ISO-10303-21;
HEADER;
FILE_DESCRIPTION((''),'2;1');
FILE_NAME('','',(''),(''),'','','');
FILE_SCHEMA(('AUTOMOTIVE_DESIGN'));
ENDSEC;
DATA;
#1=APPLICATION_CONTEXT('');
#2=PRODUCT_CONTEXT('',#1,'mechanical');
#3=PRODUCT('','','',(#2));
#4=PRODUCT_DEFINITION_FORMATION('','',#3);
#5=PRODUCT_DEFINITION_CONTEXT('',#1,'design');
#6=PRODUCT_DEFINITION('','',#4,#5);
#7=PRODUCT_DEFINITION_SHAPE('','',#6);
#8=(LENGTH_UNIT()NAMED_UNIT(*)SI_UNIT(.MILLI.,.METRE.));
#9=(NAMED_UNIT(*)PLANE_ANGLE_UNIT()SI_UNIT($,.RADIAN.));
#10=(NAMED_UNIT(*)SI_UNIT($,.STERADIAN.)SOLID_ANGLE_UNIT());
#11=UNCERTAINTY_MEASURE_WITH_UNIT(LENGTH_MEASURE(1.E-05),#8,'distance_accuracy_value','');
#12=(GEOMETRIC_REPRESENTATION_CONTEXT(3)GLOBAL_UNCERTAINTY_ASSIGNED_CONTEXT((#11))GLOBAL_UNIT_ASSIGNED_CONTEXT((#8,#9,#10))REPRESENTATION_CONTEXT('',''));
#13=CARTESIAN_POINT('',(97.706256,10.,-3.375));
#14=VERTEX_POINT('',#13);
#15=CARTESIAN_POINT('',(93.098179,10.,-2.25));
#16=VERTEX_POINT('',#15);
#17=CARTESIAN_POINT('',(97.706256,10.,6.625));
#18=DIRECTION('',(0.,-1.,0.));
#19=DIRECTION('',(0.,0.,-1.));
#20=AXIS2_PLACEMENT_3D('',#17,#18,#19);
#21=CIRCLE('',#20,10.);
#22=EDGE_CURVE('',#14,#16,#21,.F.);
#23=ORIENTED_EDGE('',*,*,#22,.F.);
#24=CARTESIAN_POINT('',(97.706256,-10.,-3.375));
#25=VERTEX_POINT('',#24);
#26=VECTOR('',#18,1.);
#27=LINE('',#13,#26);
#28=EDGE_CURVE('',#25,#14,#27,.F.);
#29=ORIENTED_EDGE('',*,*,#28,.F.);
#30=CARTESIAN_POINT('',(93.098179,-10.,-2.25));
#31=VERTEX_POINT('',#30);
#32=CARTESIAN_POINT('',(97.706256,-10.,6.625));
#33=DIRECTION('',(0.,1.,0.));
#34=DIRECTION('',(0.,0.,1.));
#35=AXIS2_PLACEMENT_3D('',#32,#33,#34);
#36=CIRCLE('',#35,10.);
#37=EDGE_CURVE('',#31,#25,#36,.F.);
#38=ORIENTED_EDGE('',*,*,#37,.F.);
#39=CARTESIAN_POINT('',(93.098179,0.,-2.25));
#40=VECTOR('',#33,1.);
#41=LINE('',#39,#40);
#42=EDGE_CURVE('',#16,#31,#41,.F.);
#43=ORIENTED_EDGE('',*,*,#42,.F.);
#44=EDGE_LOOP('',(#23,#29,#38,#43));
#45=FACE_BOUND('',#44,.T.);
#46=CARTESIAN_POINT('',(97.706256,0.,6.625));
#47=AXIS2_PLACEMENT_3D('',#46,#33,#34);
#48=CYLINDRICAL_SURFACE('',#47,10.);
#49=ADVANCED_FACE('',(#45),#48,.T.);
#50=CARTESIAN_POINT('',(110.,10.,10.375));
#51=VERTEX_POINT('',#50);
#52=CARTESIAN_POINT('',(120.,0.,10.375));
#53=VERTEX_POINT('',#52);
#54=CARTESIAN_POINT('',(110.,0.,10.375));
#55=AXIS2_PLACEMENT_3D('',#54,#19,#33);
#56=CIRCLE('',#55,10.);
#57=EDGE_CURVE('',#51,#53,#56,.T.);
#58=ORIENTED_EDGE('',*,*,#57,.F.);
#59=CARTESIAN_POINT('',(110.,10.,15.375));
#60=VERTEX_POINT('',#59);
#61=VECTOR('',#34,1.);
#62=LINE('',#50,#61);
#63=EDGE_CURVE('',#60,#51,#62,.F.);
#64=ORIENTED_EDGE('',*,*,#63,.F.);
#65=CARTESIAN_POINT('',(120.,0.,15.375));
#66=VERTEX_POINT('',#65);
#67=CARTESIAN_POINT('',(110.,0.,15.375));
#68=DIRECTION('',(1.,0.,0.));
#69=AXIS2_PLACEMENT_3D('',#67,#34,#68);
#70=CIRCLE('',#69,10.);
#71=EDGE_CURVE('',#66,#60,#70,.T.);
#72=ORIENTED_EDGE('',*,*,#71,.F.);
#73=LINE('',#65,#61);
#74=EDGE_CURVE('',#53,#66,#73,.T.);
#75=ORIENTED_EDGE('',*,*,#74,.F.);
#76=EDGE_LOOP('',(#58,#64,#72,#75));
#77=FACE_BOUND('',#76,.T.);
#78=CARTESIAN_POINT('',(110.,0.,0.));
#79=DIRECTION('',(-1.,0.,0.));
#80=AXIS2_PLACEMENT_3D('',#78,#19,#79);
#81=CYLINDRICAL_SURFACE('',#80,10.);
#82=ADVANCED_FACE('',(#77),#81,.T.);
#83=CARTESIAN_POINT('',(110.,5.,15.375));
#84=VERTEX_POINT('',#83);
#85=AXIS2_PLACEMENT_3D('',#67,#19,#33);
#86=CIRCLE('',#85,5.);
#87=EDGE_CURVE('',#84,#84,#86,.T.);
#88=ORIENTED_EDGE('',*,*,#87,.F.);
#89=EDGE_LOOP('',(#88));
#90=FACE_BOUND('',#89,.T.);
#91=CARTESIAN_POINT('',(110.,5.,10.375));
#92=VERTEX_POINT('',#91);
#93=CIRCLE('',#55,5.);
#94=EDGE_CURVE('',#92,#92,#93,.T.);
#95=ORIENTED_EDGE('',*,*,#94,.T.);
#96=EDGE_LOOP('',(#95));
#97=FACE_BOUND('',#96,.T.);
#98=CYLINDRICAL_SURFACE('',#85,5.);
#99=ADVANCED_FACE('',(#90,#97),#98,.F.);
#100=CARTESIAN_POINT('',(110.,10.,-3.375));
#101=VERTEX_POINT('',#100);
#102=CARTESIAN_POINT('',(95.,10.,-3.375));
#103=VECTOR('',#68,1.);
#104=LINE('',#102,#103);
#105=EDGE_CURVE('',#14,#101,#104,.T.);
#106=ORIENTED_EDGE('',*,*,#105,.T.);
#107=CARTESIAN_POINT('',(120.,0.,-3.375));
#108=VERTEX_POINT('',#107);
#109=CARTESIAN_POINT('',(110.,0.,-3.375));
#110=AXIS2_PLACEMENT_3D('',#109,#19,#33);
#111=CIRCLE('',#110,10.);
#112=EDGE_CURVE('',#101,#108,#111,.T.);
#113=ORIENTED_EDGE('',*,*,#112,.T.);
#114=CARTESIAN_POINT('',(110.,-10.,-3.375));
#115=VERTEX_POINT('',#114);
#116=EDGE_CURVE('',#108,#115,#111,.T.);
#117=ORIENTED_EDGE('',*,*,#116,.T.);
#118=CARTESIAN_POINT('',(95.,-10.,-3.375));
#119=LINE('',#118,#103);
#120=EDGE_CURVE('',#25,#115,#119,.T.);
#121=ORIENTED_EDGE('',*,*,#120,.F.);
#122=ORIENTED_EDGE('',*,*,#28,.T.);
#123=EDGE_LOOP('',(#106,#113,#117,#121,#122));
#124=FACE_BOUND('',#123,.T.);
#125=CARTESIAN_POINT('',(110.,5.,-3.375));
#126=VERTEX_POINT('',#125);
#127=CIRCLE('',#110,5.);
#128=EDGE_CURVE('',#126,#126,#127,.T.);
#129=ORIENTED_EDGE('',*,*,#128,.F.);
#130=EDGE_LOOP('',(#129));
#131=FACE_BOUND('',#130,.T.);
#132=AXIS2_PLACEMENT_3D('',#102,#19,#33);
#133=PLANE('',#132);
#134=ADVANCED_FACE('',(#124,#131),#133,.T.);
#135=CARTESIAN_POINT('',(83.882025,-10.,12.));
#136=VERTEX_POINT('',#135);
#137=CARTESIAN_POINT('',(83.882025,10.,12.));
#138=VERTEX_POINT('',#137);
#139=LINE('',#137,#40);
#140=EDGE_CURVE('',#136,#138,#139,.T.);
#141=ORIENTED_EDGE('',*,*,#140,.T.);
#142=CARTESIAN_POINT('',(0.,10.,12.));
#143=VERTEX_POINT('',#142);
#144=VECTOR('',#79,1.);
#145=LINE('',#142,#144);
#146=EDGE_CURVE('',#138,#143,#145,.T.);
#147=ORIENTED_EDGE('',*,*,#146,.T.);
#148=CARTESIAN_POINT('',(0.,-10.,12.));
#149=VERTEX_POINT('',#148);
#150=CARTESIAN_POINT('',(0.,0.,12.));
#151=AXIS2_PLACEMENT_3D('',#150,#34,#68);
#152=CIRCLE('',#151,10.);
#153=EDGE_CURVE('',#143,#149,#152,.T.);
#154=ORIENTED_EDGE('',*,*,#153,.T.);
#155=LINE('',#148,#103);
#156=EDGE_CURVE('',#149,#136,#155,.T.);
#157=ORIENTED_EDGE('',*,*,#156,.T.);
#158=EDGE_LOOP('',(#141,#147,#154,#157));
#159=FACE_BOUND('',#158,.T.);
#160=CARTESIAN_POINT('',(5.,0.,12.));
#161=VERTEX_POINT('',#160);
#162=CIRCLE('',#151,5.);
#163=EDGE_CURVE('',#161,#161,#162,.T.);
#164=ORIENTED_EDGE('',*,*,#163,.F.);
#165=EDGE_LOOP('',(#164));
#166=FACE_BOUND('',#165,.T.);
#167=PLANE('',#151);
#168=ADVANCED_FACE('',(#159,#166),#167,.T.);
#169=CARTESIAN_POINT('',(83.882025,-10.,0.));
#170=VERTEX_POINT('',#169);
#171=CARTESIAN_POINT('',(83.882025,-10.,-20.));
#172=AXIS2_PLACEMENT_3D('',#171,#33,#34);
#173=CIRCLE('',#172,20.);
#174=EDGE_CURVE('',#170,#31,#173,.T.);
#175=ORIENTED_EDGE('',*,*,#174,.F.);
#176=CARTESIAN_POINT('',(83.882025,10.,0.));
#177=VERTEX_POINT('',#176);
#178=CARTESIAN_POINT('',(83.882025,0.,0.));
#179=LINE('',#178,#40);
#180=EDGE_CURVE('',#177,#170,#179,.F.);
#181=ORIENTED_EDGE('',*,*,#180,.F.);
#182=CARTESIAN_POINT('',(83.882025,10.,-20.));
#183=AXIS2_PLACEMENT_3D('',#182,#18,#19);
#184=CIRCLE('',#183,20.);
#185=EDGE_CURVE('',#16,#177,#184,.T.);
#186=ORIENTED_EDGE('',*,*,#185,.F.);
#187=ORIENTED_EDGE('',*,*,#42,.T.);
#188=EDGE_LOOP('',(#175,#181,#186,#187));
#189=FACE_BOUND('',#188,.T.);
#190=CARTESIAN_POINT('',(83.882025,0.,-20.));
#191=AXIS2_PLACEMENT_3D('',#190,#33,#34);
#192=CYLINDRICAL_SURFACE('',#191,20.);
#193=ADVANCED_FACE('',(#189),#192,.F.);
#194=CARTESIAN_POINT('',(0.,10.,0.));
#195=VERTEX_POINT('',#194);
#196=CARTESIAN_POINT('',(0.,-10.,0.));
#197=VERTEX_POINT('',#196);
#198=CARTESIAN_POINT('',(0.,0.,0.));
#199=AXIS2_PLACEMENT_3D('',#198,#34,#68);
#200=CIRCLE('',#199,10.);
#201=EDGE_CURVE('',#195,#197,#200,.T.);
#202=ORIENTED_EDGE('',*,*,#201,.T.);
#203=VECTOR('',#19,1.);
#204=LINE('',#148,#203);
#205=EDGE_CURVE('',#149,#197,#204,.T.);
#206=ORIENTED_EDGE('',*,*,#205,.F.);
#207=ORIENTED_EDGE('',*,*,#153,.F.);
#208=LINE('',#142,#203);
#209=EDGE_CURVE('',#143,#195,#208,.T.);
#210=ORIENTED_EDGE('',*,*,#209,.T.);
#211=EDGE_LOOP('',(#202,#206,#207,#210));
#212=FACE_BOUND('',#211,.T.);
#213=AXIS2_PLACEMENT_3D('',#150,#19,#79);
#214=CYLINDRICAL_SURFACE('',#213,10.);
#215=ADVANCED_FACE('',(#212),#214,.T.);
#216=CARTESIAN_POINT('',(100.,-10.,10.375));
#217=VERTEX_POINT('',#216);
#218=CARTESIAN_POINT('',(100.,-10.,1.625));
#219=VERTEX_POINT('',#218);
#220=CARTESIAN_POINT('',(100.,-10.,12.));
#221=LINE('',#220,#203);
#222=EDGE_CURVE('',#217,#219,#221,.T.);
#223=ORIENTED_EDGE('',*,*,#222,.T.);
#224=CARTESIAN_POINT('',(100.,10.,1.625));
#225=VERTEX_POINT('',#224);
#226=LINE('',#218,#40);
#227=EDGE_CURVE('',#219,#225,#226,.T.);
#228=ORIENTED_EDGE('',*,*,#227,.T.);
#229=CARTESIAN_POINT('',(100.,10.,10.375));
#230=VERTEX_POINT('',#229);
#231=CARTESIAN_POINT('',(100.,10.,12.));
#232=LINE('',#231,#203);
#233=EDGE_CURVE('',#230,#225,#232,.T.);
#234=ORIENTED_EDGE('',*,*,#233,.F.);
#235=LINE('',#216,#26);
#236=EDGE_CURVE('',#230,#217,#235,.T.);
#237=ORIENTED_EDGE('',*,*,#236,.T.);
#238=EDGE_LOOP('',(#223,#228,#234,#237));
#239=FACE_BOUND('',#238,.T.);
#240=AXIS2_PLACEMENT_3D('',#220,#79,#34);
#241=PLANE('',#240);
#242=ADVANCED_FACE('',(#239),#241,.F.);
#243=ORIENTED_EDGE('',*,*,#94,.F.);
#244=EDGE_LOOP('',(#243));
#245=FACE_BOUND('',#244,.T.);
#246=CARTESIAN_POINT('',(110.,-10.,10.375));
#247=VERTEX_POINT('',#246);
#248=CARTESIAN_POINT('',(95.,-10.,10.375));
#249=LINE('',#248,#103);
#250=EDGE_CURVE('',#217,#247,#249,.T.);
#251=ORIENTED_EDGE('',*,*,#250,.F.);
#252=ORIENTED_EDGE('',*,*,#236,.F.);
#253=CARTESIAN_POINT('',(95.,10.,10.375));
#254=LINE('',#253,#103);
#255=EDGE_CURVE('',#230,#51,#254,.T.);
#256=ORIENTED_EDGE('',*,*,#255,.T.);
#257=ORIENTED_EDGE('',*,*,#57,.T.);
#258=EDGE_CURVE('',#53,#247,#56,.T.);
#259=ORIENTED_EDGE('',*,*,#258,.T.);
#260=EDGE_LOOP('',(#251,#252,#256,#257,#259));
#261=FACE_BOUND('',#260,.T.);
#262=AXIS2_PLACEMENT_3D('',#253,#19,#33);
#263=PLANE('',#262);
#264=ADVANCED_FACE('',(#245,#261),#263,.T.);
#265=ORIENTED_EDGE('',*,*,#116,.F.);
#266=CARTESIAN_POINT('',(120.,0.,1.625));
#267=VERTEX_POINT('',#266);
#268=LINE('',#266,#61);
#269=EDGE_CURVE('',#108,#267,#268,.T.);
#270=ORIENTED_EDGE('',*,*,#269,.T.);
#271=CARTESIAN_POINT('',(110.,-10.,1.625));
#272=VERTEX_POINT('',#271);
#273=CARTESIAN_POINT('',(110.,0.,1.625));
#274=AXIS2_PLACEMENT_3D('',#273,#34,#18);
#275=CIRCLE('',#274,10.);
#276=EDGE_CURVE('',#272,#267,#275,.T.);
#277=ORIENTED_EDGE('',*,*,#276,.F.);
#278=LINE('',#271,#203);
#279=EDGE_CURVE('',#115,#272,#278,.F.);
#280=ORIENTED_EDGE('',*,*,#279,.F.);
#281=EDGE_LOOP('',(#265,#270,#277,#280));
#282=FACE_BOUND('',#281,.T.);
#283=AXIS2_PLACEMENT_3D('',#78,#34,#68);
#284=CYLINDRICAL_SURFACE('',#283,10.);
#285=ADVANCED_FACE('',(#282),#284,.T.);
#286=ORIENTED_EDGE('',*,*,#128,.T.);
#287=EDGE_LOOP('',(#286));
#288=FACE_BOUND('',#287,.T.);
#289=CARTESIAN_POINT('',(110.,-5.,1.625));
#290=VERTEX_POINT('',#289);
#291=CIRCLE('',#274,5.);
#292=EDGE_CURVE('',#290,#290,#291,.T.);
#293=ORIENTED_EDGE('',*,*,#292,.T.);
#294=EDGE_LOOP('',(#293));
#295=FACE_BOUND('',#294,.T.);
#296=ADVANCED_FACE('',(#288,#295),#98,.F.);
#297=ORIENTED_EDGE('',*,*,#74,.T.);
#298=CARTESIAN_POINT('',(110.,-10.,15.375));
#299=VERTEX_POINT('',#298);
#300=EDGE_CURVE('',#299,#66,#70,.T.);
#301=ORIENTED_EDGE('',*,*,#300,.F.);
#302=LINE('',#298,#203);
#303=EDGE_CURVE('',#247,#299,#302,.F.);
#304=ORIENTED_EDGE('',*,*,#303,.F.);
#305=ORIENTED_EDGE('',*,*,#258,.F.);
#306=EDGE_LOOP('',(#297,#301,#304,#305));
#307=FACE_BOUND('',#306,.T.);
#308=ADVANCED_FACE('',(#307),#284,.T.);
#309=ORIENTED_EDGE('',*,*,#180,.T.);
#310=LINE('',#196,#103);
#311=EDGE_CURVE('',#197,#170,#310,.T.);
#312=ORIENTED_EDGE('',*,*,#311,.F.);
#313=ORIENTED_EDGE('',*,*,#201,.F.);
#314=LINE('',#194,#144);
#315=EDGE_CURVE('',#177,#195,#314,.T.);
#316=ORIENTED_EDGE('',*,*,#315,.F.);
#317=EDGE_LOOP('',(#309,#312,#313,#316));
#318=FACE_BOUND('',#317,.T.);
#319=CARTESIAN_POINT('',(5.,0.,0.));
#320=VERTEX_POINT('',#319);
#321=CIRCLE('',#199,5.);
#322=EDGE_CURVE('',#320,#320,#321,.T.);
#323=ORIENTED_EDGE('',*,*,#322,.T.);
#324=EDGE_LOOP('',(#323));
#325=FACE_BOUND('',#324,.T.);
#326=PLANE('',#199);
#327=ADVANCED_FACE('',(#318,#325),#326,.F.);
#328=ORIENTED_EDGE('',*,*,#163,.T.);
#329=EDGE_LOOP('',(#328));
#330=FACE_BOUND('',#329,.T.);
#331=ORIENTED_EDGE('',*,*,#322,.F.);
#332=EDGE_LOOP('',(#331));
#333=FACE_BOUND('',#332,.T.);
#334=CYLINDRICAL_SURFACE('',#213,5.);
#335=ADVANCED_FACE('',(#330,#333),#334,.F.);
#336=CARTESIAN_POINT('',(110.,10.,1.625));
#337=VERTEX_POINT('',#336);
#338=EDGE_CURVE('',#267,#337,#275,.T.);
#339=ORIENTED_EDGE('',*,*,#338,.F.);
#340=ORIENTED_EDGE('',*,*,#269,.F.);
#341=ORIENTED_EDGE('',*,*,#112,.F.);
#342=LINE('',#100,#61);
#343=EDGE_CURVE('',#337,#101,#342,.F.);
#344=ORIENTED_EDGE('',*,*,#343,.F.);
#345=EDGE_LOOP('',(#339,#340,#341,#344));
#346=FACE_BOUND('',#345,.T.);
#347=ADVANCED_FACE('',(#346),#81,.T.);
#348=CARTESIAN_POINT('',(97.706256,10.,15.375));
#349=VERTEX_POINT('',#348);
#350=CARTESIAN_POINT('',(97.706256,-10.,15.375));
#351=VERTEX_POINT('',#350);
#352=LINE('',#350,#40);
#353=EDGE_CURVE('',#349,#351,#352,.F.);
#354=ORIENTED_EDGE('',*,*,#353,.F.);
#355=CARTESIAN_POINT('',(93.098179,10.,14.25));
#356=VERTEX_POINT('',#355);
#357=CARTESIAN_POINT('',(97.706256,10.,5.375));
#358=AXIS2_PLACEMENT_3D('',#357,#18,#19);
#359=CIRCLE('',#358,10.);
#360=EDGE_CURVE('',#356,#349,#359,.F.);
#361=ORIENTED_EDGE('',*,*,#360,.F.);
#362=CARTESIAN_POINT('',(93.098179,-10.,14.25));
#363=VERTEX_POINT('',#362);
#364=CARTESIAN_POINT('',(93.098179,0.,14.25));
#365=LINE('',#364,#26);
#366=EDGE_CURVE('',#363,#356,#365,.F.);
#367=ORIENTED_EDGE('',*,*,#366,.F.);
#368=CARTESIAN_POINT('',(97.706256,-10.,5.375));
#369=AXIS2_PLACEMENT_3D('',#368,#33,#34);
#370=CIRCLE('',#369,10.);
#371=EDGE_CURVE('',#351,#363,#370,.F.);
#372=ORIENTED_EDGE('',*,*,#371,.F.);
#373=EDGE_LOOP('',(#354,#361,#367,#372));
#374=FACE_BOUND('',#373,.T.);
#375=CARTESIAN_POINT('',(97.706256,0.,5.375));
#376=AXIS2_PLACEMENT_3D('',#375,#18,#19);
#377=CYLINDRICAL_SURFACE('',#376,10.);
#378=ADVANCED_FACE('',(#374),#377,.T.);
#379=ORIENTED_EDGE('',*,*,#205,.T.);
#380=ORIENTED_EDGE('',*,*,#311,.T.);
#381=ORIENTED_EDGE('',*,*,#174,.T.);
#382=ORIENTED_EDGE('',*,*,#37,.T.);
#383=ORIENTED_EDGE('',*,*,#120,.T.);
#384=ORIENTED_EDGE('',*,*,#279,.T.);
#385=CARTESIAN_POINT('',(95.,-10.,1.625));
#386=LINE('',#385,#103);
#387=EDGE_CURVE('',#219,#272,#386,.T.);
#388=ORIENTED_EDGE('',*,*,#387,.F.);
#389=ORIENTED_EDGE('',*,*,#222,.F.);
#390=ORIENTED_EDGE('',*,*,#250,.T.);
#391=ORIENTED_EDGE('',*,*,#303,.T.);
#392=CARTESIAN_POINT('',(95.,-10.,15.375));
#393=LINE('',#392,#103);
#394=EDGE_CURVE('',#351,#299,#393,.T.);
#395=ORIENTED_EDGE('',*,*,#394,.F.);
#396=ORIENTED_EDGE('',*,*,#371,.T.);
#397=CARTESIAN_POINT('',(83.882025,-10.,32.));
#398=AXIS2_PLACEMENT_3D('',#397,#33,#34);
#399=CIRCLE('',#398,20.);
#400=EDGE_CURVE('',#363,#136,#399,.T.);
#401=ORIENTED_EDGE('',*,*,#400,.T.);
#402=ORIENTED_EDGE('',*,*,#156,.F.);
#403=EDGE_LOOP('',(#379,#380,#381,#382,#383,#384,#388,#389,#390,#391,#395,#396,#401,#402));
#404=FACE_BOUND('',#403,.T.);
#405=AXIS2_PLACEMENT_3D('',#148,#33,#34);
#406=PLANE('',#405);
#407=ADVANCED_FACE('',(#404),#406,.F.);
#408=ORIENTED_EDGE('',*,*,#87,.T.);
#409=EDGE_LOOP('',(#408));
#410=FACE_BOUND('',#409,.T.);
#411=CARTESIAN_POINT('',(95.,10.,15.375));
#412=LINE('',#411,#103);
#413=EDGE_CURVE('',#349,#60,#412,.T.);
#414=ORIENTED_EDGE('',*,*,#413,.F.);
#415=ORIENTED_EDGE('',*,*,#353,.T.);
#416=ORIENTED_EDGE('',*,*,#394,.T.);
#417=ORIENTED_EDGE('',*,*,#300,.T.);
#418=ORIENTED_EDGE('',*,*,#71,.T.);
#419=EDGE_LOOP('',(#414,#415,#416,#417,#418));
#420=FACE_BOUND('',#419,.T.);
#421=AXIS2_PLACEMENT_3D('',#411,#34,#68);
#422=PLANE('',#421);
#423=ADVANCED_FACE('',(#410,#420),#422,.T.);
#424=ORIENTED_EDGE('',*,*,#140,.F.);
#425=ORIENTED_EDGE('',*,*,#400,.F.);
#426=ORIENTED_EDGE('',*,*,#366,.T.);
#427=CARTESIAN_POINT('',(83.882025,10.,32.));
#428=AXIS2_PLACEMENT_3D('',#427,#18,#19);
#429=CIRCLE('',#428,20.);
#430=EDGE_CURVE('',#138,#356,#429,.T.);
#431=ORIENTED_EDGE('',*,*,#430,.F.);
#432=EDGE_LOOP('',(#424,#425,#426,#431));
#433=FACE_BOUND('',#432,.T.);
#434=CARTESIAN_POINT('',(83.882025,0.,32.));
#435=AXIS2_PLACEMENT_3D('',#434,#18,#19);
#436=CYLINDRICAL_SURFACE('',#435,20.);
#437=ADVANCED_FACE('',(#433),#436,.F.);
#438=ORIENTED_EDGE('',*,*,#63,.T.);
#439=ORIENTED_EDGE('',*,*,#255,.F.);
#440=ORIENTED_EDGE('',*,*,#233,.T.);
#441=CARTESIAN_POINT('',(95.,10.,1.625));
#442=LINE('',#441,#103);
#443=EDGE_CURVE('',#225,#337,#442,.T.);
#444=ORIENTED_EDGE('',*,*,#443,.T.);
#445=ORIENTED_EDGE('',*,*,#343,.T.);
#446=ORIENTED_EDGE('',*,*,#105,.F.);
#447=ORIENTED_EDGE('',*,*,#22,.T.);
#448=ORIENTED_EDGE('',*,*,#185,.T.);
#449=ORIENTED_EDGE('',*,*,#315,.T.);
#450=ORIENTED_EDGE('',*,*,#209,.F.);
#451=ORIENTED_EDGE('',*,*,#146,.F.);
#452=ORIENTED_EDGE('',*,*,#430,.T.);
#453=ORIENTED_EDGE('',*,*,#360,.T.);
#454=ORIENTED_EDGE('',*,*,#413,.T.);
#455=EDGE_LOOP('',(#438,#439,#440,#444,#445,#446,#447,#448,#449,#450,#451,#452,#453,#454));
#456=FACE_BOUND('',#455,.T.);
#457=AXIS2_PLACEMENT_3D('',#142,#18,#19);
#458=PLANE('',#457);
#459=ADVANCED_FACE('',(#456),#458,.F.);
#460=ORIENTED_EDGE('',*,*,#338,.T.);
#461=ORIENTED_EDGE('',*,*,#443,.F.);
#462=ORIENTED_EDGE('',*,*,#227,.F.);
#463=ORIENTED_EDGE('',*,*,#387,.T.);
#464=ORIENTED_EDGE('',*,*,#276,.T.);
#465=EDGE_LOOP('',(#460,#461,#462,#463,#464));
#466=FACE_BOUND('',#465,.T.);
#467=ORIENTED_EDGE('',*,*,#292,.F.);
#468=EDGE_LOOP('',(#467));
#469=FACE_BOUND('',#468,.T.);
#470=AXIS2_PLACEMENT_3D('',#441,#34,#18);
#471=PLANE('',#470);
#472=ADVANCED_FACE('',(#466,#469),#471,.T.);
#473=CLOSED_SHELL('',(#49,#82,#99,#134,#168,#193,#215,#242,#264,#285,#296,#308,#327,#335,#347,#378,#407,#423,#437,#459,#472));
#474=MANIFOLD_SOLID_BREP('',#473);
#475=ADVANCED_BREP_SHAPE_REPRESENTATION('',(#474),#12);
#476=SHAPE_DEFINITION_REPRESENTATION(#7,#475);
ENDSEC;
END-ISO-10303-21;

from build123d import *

# Parameters (mm, degrees)
SCHIZZO1_R                        = 5
ESTRUSIONE_ESTRUSIONE1_DEPTH      = 12
ESTRUSIONE_ESTRUSIONE2_DEPTH      = 20
ESTRUSIONE_ESTRUSIONE2_DEPTH_BACK = 5
SCHIZZO3_W                        = 5
SCHIZZO3_H                        = 20
RACCORDO1_R                       = 20
RACCORDO2_R                       = 10
RACCORDO3_R                       = 10
TAGLIO_ESTRUSIONE1_DEPTH          = 122.866986916
TAGLIO_ESTRUSIONE1_DEPTH_BACK     = 122.866986916
SCHIZZO4_R                        = 5


# Some blends are built 0.0001 mm under size
with BuildPart() as part:
    # Schizzo1 → Estrusione-Estrusione1 (new body)
    with BuildSketch(Plane.XY):
        with BuildLine():
            Line((0, 10), (100, 10))
            Line((100, 10), (100, -10))
            Line((100, -10), (0, -10))
            ThreePointArc((0, -10), (-10, 0), (0, 10))
        make_face()
        Circle(SCHIZZO1_R, mode=Mode.SUBTRACT)
    extrude(amount=ESTRUSIONE_ESTRUSIONE1_DEPTH)

    # Schizzo3 → Estrusione-Estrusione2 (add, two sides: drawn at the far end of the back side and taken through both)
    with BuildSketch(Plane(origin=(100, 0, 0), x_dir=(0, 0, -1), z_dir=(1, 0, 0)).offset(-ESTRUSIONE_ESTRUSIONE2_DEPTH_BACK)):
        with Locations((-12.875, 0)):
            Rectangle(SCHIZZO3_W, SCHIZZO3_H)
        with Locations((0.875, 0)):
            Rectangle(SCHIZZO3_W, SCHIZZO3_H)
    extrude(amount=ESTRUSIONE_ESTRUSIONE2_DEPTH + ESTRUSIONE_ESTRUSIONE2_DEPTH_BACK)

    # Raccordo1
    # the kernel refuses this fillet: 20 mm, written as the material it adds along each edge
    with BuildSketch(Plane(origin=(95, 10, 12), x_dir=(-1, 0, 0), z_dir=(0, -1, 0)), Plane(origin=(95, -10, 0), x_dir=(-1, 0, 0), z_dir=(0, 1, 0))) as raccordo1_piece_1:
        with BuildLine():
            CenterArc((11.11797531, -20), RACCORDO1_R, 90, 33.772641851)
            Line((0, -3.375), (-0.222359506, -3.0425))
            ThreePointArc((-0.222359506, -3.0425), (-0.4, -1.6875), (-0.4, 0))
            Line((-0.4, 0), (0, 0.4))
            Line((0, 0.4), (11.11797531, 0.4))
            Line((11.11797531, 0.4), (11.11797531, 0))
        make_face()
    extrude(amount=20)

    # Raccordo2
    raccordo2_edges = [part.edges().sort_by_distance(p)[0] for p in [
        (95, 0, -3.375),
        (95, 0, 15.375),
    ]]
    fillet(raccordo2_edges, radius=RACCORDO2_R)

    # Raccordo3
    raccordo3_edges = [part.edges().sort_by_distance(p)[0] for p in [
        (120, -10, 12.875),
        (120, 10, 12.875),
        (120, -10, -0.875),
        (120, 10, -0.875),
    ]]
    fillet(raccordo3_edges, radius=RACCORDO3_R - 0.0001)  # a hair under: the kernel refuses the full size

    # Schizzo4 → Taglio-Estrusione1 (cut, two sides: drawn at the far end of the back side and taken through both)
    with BuildSketch(Plane(origin=(0, 0, -3.375), x_dir=(-1, 0, 0), z_dir=(0, 0, -1)).offset(-TAGLIO_ESTRUSIONE1_DEPTH_BACK)):
        with Locations(Location((-110, 0, 0), (0, 0, 90))):
            Circle(SCHIZZO4_R)
    extrude(amount=TAGLIO_ESTRUSIONE1_DEPTH + TAGLIO_ESTRUSIONE1_DEPTH_BACK, mode=Mode.SUBTRACT)


solid = part.part
